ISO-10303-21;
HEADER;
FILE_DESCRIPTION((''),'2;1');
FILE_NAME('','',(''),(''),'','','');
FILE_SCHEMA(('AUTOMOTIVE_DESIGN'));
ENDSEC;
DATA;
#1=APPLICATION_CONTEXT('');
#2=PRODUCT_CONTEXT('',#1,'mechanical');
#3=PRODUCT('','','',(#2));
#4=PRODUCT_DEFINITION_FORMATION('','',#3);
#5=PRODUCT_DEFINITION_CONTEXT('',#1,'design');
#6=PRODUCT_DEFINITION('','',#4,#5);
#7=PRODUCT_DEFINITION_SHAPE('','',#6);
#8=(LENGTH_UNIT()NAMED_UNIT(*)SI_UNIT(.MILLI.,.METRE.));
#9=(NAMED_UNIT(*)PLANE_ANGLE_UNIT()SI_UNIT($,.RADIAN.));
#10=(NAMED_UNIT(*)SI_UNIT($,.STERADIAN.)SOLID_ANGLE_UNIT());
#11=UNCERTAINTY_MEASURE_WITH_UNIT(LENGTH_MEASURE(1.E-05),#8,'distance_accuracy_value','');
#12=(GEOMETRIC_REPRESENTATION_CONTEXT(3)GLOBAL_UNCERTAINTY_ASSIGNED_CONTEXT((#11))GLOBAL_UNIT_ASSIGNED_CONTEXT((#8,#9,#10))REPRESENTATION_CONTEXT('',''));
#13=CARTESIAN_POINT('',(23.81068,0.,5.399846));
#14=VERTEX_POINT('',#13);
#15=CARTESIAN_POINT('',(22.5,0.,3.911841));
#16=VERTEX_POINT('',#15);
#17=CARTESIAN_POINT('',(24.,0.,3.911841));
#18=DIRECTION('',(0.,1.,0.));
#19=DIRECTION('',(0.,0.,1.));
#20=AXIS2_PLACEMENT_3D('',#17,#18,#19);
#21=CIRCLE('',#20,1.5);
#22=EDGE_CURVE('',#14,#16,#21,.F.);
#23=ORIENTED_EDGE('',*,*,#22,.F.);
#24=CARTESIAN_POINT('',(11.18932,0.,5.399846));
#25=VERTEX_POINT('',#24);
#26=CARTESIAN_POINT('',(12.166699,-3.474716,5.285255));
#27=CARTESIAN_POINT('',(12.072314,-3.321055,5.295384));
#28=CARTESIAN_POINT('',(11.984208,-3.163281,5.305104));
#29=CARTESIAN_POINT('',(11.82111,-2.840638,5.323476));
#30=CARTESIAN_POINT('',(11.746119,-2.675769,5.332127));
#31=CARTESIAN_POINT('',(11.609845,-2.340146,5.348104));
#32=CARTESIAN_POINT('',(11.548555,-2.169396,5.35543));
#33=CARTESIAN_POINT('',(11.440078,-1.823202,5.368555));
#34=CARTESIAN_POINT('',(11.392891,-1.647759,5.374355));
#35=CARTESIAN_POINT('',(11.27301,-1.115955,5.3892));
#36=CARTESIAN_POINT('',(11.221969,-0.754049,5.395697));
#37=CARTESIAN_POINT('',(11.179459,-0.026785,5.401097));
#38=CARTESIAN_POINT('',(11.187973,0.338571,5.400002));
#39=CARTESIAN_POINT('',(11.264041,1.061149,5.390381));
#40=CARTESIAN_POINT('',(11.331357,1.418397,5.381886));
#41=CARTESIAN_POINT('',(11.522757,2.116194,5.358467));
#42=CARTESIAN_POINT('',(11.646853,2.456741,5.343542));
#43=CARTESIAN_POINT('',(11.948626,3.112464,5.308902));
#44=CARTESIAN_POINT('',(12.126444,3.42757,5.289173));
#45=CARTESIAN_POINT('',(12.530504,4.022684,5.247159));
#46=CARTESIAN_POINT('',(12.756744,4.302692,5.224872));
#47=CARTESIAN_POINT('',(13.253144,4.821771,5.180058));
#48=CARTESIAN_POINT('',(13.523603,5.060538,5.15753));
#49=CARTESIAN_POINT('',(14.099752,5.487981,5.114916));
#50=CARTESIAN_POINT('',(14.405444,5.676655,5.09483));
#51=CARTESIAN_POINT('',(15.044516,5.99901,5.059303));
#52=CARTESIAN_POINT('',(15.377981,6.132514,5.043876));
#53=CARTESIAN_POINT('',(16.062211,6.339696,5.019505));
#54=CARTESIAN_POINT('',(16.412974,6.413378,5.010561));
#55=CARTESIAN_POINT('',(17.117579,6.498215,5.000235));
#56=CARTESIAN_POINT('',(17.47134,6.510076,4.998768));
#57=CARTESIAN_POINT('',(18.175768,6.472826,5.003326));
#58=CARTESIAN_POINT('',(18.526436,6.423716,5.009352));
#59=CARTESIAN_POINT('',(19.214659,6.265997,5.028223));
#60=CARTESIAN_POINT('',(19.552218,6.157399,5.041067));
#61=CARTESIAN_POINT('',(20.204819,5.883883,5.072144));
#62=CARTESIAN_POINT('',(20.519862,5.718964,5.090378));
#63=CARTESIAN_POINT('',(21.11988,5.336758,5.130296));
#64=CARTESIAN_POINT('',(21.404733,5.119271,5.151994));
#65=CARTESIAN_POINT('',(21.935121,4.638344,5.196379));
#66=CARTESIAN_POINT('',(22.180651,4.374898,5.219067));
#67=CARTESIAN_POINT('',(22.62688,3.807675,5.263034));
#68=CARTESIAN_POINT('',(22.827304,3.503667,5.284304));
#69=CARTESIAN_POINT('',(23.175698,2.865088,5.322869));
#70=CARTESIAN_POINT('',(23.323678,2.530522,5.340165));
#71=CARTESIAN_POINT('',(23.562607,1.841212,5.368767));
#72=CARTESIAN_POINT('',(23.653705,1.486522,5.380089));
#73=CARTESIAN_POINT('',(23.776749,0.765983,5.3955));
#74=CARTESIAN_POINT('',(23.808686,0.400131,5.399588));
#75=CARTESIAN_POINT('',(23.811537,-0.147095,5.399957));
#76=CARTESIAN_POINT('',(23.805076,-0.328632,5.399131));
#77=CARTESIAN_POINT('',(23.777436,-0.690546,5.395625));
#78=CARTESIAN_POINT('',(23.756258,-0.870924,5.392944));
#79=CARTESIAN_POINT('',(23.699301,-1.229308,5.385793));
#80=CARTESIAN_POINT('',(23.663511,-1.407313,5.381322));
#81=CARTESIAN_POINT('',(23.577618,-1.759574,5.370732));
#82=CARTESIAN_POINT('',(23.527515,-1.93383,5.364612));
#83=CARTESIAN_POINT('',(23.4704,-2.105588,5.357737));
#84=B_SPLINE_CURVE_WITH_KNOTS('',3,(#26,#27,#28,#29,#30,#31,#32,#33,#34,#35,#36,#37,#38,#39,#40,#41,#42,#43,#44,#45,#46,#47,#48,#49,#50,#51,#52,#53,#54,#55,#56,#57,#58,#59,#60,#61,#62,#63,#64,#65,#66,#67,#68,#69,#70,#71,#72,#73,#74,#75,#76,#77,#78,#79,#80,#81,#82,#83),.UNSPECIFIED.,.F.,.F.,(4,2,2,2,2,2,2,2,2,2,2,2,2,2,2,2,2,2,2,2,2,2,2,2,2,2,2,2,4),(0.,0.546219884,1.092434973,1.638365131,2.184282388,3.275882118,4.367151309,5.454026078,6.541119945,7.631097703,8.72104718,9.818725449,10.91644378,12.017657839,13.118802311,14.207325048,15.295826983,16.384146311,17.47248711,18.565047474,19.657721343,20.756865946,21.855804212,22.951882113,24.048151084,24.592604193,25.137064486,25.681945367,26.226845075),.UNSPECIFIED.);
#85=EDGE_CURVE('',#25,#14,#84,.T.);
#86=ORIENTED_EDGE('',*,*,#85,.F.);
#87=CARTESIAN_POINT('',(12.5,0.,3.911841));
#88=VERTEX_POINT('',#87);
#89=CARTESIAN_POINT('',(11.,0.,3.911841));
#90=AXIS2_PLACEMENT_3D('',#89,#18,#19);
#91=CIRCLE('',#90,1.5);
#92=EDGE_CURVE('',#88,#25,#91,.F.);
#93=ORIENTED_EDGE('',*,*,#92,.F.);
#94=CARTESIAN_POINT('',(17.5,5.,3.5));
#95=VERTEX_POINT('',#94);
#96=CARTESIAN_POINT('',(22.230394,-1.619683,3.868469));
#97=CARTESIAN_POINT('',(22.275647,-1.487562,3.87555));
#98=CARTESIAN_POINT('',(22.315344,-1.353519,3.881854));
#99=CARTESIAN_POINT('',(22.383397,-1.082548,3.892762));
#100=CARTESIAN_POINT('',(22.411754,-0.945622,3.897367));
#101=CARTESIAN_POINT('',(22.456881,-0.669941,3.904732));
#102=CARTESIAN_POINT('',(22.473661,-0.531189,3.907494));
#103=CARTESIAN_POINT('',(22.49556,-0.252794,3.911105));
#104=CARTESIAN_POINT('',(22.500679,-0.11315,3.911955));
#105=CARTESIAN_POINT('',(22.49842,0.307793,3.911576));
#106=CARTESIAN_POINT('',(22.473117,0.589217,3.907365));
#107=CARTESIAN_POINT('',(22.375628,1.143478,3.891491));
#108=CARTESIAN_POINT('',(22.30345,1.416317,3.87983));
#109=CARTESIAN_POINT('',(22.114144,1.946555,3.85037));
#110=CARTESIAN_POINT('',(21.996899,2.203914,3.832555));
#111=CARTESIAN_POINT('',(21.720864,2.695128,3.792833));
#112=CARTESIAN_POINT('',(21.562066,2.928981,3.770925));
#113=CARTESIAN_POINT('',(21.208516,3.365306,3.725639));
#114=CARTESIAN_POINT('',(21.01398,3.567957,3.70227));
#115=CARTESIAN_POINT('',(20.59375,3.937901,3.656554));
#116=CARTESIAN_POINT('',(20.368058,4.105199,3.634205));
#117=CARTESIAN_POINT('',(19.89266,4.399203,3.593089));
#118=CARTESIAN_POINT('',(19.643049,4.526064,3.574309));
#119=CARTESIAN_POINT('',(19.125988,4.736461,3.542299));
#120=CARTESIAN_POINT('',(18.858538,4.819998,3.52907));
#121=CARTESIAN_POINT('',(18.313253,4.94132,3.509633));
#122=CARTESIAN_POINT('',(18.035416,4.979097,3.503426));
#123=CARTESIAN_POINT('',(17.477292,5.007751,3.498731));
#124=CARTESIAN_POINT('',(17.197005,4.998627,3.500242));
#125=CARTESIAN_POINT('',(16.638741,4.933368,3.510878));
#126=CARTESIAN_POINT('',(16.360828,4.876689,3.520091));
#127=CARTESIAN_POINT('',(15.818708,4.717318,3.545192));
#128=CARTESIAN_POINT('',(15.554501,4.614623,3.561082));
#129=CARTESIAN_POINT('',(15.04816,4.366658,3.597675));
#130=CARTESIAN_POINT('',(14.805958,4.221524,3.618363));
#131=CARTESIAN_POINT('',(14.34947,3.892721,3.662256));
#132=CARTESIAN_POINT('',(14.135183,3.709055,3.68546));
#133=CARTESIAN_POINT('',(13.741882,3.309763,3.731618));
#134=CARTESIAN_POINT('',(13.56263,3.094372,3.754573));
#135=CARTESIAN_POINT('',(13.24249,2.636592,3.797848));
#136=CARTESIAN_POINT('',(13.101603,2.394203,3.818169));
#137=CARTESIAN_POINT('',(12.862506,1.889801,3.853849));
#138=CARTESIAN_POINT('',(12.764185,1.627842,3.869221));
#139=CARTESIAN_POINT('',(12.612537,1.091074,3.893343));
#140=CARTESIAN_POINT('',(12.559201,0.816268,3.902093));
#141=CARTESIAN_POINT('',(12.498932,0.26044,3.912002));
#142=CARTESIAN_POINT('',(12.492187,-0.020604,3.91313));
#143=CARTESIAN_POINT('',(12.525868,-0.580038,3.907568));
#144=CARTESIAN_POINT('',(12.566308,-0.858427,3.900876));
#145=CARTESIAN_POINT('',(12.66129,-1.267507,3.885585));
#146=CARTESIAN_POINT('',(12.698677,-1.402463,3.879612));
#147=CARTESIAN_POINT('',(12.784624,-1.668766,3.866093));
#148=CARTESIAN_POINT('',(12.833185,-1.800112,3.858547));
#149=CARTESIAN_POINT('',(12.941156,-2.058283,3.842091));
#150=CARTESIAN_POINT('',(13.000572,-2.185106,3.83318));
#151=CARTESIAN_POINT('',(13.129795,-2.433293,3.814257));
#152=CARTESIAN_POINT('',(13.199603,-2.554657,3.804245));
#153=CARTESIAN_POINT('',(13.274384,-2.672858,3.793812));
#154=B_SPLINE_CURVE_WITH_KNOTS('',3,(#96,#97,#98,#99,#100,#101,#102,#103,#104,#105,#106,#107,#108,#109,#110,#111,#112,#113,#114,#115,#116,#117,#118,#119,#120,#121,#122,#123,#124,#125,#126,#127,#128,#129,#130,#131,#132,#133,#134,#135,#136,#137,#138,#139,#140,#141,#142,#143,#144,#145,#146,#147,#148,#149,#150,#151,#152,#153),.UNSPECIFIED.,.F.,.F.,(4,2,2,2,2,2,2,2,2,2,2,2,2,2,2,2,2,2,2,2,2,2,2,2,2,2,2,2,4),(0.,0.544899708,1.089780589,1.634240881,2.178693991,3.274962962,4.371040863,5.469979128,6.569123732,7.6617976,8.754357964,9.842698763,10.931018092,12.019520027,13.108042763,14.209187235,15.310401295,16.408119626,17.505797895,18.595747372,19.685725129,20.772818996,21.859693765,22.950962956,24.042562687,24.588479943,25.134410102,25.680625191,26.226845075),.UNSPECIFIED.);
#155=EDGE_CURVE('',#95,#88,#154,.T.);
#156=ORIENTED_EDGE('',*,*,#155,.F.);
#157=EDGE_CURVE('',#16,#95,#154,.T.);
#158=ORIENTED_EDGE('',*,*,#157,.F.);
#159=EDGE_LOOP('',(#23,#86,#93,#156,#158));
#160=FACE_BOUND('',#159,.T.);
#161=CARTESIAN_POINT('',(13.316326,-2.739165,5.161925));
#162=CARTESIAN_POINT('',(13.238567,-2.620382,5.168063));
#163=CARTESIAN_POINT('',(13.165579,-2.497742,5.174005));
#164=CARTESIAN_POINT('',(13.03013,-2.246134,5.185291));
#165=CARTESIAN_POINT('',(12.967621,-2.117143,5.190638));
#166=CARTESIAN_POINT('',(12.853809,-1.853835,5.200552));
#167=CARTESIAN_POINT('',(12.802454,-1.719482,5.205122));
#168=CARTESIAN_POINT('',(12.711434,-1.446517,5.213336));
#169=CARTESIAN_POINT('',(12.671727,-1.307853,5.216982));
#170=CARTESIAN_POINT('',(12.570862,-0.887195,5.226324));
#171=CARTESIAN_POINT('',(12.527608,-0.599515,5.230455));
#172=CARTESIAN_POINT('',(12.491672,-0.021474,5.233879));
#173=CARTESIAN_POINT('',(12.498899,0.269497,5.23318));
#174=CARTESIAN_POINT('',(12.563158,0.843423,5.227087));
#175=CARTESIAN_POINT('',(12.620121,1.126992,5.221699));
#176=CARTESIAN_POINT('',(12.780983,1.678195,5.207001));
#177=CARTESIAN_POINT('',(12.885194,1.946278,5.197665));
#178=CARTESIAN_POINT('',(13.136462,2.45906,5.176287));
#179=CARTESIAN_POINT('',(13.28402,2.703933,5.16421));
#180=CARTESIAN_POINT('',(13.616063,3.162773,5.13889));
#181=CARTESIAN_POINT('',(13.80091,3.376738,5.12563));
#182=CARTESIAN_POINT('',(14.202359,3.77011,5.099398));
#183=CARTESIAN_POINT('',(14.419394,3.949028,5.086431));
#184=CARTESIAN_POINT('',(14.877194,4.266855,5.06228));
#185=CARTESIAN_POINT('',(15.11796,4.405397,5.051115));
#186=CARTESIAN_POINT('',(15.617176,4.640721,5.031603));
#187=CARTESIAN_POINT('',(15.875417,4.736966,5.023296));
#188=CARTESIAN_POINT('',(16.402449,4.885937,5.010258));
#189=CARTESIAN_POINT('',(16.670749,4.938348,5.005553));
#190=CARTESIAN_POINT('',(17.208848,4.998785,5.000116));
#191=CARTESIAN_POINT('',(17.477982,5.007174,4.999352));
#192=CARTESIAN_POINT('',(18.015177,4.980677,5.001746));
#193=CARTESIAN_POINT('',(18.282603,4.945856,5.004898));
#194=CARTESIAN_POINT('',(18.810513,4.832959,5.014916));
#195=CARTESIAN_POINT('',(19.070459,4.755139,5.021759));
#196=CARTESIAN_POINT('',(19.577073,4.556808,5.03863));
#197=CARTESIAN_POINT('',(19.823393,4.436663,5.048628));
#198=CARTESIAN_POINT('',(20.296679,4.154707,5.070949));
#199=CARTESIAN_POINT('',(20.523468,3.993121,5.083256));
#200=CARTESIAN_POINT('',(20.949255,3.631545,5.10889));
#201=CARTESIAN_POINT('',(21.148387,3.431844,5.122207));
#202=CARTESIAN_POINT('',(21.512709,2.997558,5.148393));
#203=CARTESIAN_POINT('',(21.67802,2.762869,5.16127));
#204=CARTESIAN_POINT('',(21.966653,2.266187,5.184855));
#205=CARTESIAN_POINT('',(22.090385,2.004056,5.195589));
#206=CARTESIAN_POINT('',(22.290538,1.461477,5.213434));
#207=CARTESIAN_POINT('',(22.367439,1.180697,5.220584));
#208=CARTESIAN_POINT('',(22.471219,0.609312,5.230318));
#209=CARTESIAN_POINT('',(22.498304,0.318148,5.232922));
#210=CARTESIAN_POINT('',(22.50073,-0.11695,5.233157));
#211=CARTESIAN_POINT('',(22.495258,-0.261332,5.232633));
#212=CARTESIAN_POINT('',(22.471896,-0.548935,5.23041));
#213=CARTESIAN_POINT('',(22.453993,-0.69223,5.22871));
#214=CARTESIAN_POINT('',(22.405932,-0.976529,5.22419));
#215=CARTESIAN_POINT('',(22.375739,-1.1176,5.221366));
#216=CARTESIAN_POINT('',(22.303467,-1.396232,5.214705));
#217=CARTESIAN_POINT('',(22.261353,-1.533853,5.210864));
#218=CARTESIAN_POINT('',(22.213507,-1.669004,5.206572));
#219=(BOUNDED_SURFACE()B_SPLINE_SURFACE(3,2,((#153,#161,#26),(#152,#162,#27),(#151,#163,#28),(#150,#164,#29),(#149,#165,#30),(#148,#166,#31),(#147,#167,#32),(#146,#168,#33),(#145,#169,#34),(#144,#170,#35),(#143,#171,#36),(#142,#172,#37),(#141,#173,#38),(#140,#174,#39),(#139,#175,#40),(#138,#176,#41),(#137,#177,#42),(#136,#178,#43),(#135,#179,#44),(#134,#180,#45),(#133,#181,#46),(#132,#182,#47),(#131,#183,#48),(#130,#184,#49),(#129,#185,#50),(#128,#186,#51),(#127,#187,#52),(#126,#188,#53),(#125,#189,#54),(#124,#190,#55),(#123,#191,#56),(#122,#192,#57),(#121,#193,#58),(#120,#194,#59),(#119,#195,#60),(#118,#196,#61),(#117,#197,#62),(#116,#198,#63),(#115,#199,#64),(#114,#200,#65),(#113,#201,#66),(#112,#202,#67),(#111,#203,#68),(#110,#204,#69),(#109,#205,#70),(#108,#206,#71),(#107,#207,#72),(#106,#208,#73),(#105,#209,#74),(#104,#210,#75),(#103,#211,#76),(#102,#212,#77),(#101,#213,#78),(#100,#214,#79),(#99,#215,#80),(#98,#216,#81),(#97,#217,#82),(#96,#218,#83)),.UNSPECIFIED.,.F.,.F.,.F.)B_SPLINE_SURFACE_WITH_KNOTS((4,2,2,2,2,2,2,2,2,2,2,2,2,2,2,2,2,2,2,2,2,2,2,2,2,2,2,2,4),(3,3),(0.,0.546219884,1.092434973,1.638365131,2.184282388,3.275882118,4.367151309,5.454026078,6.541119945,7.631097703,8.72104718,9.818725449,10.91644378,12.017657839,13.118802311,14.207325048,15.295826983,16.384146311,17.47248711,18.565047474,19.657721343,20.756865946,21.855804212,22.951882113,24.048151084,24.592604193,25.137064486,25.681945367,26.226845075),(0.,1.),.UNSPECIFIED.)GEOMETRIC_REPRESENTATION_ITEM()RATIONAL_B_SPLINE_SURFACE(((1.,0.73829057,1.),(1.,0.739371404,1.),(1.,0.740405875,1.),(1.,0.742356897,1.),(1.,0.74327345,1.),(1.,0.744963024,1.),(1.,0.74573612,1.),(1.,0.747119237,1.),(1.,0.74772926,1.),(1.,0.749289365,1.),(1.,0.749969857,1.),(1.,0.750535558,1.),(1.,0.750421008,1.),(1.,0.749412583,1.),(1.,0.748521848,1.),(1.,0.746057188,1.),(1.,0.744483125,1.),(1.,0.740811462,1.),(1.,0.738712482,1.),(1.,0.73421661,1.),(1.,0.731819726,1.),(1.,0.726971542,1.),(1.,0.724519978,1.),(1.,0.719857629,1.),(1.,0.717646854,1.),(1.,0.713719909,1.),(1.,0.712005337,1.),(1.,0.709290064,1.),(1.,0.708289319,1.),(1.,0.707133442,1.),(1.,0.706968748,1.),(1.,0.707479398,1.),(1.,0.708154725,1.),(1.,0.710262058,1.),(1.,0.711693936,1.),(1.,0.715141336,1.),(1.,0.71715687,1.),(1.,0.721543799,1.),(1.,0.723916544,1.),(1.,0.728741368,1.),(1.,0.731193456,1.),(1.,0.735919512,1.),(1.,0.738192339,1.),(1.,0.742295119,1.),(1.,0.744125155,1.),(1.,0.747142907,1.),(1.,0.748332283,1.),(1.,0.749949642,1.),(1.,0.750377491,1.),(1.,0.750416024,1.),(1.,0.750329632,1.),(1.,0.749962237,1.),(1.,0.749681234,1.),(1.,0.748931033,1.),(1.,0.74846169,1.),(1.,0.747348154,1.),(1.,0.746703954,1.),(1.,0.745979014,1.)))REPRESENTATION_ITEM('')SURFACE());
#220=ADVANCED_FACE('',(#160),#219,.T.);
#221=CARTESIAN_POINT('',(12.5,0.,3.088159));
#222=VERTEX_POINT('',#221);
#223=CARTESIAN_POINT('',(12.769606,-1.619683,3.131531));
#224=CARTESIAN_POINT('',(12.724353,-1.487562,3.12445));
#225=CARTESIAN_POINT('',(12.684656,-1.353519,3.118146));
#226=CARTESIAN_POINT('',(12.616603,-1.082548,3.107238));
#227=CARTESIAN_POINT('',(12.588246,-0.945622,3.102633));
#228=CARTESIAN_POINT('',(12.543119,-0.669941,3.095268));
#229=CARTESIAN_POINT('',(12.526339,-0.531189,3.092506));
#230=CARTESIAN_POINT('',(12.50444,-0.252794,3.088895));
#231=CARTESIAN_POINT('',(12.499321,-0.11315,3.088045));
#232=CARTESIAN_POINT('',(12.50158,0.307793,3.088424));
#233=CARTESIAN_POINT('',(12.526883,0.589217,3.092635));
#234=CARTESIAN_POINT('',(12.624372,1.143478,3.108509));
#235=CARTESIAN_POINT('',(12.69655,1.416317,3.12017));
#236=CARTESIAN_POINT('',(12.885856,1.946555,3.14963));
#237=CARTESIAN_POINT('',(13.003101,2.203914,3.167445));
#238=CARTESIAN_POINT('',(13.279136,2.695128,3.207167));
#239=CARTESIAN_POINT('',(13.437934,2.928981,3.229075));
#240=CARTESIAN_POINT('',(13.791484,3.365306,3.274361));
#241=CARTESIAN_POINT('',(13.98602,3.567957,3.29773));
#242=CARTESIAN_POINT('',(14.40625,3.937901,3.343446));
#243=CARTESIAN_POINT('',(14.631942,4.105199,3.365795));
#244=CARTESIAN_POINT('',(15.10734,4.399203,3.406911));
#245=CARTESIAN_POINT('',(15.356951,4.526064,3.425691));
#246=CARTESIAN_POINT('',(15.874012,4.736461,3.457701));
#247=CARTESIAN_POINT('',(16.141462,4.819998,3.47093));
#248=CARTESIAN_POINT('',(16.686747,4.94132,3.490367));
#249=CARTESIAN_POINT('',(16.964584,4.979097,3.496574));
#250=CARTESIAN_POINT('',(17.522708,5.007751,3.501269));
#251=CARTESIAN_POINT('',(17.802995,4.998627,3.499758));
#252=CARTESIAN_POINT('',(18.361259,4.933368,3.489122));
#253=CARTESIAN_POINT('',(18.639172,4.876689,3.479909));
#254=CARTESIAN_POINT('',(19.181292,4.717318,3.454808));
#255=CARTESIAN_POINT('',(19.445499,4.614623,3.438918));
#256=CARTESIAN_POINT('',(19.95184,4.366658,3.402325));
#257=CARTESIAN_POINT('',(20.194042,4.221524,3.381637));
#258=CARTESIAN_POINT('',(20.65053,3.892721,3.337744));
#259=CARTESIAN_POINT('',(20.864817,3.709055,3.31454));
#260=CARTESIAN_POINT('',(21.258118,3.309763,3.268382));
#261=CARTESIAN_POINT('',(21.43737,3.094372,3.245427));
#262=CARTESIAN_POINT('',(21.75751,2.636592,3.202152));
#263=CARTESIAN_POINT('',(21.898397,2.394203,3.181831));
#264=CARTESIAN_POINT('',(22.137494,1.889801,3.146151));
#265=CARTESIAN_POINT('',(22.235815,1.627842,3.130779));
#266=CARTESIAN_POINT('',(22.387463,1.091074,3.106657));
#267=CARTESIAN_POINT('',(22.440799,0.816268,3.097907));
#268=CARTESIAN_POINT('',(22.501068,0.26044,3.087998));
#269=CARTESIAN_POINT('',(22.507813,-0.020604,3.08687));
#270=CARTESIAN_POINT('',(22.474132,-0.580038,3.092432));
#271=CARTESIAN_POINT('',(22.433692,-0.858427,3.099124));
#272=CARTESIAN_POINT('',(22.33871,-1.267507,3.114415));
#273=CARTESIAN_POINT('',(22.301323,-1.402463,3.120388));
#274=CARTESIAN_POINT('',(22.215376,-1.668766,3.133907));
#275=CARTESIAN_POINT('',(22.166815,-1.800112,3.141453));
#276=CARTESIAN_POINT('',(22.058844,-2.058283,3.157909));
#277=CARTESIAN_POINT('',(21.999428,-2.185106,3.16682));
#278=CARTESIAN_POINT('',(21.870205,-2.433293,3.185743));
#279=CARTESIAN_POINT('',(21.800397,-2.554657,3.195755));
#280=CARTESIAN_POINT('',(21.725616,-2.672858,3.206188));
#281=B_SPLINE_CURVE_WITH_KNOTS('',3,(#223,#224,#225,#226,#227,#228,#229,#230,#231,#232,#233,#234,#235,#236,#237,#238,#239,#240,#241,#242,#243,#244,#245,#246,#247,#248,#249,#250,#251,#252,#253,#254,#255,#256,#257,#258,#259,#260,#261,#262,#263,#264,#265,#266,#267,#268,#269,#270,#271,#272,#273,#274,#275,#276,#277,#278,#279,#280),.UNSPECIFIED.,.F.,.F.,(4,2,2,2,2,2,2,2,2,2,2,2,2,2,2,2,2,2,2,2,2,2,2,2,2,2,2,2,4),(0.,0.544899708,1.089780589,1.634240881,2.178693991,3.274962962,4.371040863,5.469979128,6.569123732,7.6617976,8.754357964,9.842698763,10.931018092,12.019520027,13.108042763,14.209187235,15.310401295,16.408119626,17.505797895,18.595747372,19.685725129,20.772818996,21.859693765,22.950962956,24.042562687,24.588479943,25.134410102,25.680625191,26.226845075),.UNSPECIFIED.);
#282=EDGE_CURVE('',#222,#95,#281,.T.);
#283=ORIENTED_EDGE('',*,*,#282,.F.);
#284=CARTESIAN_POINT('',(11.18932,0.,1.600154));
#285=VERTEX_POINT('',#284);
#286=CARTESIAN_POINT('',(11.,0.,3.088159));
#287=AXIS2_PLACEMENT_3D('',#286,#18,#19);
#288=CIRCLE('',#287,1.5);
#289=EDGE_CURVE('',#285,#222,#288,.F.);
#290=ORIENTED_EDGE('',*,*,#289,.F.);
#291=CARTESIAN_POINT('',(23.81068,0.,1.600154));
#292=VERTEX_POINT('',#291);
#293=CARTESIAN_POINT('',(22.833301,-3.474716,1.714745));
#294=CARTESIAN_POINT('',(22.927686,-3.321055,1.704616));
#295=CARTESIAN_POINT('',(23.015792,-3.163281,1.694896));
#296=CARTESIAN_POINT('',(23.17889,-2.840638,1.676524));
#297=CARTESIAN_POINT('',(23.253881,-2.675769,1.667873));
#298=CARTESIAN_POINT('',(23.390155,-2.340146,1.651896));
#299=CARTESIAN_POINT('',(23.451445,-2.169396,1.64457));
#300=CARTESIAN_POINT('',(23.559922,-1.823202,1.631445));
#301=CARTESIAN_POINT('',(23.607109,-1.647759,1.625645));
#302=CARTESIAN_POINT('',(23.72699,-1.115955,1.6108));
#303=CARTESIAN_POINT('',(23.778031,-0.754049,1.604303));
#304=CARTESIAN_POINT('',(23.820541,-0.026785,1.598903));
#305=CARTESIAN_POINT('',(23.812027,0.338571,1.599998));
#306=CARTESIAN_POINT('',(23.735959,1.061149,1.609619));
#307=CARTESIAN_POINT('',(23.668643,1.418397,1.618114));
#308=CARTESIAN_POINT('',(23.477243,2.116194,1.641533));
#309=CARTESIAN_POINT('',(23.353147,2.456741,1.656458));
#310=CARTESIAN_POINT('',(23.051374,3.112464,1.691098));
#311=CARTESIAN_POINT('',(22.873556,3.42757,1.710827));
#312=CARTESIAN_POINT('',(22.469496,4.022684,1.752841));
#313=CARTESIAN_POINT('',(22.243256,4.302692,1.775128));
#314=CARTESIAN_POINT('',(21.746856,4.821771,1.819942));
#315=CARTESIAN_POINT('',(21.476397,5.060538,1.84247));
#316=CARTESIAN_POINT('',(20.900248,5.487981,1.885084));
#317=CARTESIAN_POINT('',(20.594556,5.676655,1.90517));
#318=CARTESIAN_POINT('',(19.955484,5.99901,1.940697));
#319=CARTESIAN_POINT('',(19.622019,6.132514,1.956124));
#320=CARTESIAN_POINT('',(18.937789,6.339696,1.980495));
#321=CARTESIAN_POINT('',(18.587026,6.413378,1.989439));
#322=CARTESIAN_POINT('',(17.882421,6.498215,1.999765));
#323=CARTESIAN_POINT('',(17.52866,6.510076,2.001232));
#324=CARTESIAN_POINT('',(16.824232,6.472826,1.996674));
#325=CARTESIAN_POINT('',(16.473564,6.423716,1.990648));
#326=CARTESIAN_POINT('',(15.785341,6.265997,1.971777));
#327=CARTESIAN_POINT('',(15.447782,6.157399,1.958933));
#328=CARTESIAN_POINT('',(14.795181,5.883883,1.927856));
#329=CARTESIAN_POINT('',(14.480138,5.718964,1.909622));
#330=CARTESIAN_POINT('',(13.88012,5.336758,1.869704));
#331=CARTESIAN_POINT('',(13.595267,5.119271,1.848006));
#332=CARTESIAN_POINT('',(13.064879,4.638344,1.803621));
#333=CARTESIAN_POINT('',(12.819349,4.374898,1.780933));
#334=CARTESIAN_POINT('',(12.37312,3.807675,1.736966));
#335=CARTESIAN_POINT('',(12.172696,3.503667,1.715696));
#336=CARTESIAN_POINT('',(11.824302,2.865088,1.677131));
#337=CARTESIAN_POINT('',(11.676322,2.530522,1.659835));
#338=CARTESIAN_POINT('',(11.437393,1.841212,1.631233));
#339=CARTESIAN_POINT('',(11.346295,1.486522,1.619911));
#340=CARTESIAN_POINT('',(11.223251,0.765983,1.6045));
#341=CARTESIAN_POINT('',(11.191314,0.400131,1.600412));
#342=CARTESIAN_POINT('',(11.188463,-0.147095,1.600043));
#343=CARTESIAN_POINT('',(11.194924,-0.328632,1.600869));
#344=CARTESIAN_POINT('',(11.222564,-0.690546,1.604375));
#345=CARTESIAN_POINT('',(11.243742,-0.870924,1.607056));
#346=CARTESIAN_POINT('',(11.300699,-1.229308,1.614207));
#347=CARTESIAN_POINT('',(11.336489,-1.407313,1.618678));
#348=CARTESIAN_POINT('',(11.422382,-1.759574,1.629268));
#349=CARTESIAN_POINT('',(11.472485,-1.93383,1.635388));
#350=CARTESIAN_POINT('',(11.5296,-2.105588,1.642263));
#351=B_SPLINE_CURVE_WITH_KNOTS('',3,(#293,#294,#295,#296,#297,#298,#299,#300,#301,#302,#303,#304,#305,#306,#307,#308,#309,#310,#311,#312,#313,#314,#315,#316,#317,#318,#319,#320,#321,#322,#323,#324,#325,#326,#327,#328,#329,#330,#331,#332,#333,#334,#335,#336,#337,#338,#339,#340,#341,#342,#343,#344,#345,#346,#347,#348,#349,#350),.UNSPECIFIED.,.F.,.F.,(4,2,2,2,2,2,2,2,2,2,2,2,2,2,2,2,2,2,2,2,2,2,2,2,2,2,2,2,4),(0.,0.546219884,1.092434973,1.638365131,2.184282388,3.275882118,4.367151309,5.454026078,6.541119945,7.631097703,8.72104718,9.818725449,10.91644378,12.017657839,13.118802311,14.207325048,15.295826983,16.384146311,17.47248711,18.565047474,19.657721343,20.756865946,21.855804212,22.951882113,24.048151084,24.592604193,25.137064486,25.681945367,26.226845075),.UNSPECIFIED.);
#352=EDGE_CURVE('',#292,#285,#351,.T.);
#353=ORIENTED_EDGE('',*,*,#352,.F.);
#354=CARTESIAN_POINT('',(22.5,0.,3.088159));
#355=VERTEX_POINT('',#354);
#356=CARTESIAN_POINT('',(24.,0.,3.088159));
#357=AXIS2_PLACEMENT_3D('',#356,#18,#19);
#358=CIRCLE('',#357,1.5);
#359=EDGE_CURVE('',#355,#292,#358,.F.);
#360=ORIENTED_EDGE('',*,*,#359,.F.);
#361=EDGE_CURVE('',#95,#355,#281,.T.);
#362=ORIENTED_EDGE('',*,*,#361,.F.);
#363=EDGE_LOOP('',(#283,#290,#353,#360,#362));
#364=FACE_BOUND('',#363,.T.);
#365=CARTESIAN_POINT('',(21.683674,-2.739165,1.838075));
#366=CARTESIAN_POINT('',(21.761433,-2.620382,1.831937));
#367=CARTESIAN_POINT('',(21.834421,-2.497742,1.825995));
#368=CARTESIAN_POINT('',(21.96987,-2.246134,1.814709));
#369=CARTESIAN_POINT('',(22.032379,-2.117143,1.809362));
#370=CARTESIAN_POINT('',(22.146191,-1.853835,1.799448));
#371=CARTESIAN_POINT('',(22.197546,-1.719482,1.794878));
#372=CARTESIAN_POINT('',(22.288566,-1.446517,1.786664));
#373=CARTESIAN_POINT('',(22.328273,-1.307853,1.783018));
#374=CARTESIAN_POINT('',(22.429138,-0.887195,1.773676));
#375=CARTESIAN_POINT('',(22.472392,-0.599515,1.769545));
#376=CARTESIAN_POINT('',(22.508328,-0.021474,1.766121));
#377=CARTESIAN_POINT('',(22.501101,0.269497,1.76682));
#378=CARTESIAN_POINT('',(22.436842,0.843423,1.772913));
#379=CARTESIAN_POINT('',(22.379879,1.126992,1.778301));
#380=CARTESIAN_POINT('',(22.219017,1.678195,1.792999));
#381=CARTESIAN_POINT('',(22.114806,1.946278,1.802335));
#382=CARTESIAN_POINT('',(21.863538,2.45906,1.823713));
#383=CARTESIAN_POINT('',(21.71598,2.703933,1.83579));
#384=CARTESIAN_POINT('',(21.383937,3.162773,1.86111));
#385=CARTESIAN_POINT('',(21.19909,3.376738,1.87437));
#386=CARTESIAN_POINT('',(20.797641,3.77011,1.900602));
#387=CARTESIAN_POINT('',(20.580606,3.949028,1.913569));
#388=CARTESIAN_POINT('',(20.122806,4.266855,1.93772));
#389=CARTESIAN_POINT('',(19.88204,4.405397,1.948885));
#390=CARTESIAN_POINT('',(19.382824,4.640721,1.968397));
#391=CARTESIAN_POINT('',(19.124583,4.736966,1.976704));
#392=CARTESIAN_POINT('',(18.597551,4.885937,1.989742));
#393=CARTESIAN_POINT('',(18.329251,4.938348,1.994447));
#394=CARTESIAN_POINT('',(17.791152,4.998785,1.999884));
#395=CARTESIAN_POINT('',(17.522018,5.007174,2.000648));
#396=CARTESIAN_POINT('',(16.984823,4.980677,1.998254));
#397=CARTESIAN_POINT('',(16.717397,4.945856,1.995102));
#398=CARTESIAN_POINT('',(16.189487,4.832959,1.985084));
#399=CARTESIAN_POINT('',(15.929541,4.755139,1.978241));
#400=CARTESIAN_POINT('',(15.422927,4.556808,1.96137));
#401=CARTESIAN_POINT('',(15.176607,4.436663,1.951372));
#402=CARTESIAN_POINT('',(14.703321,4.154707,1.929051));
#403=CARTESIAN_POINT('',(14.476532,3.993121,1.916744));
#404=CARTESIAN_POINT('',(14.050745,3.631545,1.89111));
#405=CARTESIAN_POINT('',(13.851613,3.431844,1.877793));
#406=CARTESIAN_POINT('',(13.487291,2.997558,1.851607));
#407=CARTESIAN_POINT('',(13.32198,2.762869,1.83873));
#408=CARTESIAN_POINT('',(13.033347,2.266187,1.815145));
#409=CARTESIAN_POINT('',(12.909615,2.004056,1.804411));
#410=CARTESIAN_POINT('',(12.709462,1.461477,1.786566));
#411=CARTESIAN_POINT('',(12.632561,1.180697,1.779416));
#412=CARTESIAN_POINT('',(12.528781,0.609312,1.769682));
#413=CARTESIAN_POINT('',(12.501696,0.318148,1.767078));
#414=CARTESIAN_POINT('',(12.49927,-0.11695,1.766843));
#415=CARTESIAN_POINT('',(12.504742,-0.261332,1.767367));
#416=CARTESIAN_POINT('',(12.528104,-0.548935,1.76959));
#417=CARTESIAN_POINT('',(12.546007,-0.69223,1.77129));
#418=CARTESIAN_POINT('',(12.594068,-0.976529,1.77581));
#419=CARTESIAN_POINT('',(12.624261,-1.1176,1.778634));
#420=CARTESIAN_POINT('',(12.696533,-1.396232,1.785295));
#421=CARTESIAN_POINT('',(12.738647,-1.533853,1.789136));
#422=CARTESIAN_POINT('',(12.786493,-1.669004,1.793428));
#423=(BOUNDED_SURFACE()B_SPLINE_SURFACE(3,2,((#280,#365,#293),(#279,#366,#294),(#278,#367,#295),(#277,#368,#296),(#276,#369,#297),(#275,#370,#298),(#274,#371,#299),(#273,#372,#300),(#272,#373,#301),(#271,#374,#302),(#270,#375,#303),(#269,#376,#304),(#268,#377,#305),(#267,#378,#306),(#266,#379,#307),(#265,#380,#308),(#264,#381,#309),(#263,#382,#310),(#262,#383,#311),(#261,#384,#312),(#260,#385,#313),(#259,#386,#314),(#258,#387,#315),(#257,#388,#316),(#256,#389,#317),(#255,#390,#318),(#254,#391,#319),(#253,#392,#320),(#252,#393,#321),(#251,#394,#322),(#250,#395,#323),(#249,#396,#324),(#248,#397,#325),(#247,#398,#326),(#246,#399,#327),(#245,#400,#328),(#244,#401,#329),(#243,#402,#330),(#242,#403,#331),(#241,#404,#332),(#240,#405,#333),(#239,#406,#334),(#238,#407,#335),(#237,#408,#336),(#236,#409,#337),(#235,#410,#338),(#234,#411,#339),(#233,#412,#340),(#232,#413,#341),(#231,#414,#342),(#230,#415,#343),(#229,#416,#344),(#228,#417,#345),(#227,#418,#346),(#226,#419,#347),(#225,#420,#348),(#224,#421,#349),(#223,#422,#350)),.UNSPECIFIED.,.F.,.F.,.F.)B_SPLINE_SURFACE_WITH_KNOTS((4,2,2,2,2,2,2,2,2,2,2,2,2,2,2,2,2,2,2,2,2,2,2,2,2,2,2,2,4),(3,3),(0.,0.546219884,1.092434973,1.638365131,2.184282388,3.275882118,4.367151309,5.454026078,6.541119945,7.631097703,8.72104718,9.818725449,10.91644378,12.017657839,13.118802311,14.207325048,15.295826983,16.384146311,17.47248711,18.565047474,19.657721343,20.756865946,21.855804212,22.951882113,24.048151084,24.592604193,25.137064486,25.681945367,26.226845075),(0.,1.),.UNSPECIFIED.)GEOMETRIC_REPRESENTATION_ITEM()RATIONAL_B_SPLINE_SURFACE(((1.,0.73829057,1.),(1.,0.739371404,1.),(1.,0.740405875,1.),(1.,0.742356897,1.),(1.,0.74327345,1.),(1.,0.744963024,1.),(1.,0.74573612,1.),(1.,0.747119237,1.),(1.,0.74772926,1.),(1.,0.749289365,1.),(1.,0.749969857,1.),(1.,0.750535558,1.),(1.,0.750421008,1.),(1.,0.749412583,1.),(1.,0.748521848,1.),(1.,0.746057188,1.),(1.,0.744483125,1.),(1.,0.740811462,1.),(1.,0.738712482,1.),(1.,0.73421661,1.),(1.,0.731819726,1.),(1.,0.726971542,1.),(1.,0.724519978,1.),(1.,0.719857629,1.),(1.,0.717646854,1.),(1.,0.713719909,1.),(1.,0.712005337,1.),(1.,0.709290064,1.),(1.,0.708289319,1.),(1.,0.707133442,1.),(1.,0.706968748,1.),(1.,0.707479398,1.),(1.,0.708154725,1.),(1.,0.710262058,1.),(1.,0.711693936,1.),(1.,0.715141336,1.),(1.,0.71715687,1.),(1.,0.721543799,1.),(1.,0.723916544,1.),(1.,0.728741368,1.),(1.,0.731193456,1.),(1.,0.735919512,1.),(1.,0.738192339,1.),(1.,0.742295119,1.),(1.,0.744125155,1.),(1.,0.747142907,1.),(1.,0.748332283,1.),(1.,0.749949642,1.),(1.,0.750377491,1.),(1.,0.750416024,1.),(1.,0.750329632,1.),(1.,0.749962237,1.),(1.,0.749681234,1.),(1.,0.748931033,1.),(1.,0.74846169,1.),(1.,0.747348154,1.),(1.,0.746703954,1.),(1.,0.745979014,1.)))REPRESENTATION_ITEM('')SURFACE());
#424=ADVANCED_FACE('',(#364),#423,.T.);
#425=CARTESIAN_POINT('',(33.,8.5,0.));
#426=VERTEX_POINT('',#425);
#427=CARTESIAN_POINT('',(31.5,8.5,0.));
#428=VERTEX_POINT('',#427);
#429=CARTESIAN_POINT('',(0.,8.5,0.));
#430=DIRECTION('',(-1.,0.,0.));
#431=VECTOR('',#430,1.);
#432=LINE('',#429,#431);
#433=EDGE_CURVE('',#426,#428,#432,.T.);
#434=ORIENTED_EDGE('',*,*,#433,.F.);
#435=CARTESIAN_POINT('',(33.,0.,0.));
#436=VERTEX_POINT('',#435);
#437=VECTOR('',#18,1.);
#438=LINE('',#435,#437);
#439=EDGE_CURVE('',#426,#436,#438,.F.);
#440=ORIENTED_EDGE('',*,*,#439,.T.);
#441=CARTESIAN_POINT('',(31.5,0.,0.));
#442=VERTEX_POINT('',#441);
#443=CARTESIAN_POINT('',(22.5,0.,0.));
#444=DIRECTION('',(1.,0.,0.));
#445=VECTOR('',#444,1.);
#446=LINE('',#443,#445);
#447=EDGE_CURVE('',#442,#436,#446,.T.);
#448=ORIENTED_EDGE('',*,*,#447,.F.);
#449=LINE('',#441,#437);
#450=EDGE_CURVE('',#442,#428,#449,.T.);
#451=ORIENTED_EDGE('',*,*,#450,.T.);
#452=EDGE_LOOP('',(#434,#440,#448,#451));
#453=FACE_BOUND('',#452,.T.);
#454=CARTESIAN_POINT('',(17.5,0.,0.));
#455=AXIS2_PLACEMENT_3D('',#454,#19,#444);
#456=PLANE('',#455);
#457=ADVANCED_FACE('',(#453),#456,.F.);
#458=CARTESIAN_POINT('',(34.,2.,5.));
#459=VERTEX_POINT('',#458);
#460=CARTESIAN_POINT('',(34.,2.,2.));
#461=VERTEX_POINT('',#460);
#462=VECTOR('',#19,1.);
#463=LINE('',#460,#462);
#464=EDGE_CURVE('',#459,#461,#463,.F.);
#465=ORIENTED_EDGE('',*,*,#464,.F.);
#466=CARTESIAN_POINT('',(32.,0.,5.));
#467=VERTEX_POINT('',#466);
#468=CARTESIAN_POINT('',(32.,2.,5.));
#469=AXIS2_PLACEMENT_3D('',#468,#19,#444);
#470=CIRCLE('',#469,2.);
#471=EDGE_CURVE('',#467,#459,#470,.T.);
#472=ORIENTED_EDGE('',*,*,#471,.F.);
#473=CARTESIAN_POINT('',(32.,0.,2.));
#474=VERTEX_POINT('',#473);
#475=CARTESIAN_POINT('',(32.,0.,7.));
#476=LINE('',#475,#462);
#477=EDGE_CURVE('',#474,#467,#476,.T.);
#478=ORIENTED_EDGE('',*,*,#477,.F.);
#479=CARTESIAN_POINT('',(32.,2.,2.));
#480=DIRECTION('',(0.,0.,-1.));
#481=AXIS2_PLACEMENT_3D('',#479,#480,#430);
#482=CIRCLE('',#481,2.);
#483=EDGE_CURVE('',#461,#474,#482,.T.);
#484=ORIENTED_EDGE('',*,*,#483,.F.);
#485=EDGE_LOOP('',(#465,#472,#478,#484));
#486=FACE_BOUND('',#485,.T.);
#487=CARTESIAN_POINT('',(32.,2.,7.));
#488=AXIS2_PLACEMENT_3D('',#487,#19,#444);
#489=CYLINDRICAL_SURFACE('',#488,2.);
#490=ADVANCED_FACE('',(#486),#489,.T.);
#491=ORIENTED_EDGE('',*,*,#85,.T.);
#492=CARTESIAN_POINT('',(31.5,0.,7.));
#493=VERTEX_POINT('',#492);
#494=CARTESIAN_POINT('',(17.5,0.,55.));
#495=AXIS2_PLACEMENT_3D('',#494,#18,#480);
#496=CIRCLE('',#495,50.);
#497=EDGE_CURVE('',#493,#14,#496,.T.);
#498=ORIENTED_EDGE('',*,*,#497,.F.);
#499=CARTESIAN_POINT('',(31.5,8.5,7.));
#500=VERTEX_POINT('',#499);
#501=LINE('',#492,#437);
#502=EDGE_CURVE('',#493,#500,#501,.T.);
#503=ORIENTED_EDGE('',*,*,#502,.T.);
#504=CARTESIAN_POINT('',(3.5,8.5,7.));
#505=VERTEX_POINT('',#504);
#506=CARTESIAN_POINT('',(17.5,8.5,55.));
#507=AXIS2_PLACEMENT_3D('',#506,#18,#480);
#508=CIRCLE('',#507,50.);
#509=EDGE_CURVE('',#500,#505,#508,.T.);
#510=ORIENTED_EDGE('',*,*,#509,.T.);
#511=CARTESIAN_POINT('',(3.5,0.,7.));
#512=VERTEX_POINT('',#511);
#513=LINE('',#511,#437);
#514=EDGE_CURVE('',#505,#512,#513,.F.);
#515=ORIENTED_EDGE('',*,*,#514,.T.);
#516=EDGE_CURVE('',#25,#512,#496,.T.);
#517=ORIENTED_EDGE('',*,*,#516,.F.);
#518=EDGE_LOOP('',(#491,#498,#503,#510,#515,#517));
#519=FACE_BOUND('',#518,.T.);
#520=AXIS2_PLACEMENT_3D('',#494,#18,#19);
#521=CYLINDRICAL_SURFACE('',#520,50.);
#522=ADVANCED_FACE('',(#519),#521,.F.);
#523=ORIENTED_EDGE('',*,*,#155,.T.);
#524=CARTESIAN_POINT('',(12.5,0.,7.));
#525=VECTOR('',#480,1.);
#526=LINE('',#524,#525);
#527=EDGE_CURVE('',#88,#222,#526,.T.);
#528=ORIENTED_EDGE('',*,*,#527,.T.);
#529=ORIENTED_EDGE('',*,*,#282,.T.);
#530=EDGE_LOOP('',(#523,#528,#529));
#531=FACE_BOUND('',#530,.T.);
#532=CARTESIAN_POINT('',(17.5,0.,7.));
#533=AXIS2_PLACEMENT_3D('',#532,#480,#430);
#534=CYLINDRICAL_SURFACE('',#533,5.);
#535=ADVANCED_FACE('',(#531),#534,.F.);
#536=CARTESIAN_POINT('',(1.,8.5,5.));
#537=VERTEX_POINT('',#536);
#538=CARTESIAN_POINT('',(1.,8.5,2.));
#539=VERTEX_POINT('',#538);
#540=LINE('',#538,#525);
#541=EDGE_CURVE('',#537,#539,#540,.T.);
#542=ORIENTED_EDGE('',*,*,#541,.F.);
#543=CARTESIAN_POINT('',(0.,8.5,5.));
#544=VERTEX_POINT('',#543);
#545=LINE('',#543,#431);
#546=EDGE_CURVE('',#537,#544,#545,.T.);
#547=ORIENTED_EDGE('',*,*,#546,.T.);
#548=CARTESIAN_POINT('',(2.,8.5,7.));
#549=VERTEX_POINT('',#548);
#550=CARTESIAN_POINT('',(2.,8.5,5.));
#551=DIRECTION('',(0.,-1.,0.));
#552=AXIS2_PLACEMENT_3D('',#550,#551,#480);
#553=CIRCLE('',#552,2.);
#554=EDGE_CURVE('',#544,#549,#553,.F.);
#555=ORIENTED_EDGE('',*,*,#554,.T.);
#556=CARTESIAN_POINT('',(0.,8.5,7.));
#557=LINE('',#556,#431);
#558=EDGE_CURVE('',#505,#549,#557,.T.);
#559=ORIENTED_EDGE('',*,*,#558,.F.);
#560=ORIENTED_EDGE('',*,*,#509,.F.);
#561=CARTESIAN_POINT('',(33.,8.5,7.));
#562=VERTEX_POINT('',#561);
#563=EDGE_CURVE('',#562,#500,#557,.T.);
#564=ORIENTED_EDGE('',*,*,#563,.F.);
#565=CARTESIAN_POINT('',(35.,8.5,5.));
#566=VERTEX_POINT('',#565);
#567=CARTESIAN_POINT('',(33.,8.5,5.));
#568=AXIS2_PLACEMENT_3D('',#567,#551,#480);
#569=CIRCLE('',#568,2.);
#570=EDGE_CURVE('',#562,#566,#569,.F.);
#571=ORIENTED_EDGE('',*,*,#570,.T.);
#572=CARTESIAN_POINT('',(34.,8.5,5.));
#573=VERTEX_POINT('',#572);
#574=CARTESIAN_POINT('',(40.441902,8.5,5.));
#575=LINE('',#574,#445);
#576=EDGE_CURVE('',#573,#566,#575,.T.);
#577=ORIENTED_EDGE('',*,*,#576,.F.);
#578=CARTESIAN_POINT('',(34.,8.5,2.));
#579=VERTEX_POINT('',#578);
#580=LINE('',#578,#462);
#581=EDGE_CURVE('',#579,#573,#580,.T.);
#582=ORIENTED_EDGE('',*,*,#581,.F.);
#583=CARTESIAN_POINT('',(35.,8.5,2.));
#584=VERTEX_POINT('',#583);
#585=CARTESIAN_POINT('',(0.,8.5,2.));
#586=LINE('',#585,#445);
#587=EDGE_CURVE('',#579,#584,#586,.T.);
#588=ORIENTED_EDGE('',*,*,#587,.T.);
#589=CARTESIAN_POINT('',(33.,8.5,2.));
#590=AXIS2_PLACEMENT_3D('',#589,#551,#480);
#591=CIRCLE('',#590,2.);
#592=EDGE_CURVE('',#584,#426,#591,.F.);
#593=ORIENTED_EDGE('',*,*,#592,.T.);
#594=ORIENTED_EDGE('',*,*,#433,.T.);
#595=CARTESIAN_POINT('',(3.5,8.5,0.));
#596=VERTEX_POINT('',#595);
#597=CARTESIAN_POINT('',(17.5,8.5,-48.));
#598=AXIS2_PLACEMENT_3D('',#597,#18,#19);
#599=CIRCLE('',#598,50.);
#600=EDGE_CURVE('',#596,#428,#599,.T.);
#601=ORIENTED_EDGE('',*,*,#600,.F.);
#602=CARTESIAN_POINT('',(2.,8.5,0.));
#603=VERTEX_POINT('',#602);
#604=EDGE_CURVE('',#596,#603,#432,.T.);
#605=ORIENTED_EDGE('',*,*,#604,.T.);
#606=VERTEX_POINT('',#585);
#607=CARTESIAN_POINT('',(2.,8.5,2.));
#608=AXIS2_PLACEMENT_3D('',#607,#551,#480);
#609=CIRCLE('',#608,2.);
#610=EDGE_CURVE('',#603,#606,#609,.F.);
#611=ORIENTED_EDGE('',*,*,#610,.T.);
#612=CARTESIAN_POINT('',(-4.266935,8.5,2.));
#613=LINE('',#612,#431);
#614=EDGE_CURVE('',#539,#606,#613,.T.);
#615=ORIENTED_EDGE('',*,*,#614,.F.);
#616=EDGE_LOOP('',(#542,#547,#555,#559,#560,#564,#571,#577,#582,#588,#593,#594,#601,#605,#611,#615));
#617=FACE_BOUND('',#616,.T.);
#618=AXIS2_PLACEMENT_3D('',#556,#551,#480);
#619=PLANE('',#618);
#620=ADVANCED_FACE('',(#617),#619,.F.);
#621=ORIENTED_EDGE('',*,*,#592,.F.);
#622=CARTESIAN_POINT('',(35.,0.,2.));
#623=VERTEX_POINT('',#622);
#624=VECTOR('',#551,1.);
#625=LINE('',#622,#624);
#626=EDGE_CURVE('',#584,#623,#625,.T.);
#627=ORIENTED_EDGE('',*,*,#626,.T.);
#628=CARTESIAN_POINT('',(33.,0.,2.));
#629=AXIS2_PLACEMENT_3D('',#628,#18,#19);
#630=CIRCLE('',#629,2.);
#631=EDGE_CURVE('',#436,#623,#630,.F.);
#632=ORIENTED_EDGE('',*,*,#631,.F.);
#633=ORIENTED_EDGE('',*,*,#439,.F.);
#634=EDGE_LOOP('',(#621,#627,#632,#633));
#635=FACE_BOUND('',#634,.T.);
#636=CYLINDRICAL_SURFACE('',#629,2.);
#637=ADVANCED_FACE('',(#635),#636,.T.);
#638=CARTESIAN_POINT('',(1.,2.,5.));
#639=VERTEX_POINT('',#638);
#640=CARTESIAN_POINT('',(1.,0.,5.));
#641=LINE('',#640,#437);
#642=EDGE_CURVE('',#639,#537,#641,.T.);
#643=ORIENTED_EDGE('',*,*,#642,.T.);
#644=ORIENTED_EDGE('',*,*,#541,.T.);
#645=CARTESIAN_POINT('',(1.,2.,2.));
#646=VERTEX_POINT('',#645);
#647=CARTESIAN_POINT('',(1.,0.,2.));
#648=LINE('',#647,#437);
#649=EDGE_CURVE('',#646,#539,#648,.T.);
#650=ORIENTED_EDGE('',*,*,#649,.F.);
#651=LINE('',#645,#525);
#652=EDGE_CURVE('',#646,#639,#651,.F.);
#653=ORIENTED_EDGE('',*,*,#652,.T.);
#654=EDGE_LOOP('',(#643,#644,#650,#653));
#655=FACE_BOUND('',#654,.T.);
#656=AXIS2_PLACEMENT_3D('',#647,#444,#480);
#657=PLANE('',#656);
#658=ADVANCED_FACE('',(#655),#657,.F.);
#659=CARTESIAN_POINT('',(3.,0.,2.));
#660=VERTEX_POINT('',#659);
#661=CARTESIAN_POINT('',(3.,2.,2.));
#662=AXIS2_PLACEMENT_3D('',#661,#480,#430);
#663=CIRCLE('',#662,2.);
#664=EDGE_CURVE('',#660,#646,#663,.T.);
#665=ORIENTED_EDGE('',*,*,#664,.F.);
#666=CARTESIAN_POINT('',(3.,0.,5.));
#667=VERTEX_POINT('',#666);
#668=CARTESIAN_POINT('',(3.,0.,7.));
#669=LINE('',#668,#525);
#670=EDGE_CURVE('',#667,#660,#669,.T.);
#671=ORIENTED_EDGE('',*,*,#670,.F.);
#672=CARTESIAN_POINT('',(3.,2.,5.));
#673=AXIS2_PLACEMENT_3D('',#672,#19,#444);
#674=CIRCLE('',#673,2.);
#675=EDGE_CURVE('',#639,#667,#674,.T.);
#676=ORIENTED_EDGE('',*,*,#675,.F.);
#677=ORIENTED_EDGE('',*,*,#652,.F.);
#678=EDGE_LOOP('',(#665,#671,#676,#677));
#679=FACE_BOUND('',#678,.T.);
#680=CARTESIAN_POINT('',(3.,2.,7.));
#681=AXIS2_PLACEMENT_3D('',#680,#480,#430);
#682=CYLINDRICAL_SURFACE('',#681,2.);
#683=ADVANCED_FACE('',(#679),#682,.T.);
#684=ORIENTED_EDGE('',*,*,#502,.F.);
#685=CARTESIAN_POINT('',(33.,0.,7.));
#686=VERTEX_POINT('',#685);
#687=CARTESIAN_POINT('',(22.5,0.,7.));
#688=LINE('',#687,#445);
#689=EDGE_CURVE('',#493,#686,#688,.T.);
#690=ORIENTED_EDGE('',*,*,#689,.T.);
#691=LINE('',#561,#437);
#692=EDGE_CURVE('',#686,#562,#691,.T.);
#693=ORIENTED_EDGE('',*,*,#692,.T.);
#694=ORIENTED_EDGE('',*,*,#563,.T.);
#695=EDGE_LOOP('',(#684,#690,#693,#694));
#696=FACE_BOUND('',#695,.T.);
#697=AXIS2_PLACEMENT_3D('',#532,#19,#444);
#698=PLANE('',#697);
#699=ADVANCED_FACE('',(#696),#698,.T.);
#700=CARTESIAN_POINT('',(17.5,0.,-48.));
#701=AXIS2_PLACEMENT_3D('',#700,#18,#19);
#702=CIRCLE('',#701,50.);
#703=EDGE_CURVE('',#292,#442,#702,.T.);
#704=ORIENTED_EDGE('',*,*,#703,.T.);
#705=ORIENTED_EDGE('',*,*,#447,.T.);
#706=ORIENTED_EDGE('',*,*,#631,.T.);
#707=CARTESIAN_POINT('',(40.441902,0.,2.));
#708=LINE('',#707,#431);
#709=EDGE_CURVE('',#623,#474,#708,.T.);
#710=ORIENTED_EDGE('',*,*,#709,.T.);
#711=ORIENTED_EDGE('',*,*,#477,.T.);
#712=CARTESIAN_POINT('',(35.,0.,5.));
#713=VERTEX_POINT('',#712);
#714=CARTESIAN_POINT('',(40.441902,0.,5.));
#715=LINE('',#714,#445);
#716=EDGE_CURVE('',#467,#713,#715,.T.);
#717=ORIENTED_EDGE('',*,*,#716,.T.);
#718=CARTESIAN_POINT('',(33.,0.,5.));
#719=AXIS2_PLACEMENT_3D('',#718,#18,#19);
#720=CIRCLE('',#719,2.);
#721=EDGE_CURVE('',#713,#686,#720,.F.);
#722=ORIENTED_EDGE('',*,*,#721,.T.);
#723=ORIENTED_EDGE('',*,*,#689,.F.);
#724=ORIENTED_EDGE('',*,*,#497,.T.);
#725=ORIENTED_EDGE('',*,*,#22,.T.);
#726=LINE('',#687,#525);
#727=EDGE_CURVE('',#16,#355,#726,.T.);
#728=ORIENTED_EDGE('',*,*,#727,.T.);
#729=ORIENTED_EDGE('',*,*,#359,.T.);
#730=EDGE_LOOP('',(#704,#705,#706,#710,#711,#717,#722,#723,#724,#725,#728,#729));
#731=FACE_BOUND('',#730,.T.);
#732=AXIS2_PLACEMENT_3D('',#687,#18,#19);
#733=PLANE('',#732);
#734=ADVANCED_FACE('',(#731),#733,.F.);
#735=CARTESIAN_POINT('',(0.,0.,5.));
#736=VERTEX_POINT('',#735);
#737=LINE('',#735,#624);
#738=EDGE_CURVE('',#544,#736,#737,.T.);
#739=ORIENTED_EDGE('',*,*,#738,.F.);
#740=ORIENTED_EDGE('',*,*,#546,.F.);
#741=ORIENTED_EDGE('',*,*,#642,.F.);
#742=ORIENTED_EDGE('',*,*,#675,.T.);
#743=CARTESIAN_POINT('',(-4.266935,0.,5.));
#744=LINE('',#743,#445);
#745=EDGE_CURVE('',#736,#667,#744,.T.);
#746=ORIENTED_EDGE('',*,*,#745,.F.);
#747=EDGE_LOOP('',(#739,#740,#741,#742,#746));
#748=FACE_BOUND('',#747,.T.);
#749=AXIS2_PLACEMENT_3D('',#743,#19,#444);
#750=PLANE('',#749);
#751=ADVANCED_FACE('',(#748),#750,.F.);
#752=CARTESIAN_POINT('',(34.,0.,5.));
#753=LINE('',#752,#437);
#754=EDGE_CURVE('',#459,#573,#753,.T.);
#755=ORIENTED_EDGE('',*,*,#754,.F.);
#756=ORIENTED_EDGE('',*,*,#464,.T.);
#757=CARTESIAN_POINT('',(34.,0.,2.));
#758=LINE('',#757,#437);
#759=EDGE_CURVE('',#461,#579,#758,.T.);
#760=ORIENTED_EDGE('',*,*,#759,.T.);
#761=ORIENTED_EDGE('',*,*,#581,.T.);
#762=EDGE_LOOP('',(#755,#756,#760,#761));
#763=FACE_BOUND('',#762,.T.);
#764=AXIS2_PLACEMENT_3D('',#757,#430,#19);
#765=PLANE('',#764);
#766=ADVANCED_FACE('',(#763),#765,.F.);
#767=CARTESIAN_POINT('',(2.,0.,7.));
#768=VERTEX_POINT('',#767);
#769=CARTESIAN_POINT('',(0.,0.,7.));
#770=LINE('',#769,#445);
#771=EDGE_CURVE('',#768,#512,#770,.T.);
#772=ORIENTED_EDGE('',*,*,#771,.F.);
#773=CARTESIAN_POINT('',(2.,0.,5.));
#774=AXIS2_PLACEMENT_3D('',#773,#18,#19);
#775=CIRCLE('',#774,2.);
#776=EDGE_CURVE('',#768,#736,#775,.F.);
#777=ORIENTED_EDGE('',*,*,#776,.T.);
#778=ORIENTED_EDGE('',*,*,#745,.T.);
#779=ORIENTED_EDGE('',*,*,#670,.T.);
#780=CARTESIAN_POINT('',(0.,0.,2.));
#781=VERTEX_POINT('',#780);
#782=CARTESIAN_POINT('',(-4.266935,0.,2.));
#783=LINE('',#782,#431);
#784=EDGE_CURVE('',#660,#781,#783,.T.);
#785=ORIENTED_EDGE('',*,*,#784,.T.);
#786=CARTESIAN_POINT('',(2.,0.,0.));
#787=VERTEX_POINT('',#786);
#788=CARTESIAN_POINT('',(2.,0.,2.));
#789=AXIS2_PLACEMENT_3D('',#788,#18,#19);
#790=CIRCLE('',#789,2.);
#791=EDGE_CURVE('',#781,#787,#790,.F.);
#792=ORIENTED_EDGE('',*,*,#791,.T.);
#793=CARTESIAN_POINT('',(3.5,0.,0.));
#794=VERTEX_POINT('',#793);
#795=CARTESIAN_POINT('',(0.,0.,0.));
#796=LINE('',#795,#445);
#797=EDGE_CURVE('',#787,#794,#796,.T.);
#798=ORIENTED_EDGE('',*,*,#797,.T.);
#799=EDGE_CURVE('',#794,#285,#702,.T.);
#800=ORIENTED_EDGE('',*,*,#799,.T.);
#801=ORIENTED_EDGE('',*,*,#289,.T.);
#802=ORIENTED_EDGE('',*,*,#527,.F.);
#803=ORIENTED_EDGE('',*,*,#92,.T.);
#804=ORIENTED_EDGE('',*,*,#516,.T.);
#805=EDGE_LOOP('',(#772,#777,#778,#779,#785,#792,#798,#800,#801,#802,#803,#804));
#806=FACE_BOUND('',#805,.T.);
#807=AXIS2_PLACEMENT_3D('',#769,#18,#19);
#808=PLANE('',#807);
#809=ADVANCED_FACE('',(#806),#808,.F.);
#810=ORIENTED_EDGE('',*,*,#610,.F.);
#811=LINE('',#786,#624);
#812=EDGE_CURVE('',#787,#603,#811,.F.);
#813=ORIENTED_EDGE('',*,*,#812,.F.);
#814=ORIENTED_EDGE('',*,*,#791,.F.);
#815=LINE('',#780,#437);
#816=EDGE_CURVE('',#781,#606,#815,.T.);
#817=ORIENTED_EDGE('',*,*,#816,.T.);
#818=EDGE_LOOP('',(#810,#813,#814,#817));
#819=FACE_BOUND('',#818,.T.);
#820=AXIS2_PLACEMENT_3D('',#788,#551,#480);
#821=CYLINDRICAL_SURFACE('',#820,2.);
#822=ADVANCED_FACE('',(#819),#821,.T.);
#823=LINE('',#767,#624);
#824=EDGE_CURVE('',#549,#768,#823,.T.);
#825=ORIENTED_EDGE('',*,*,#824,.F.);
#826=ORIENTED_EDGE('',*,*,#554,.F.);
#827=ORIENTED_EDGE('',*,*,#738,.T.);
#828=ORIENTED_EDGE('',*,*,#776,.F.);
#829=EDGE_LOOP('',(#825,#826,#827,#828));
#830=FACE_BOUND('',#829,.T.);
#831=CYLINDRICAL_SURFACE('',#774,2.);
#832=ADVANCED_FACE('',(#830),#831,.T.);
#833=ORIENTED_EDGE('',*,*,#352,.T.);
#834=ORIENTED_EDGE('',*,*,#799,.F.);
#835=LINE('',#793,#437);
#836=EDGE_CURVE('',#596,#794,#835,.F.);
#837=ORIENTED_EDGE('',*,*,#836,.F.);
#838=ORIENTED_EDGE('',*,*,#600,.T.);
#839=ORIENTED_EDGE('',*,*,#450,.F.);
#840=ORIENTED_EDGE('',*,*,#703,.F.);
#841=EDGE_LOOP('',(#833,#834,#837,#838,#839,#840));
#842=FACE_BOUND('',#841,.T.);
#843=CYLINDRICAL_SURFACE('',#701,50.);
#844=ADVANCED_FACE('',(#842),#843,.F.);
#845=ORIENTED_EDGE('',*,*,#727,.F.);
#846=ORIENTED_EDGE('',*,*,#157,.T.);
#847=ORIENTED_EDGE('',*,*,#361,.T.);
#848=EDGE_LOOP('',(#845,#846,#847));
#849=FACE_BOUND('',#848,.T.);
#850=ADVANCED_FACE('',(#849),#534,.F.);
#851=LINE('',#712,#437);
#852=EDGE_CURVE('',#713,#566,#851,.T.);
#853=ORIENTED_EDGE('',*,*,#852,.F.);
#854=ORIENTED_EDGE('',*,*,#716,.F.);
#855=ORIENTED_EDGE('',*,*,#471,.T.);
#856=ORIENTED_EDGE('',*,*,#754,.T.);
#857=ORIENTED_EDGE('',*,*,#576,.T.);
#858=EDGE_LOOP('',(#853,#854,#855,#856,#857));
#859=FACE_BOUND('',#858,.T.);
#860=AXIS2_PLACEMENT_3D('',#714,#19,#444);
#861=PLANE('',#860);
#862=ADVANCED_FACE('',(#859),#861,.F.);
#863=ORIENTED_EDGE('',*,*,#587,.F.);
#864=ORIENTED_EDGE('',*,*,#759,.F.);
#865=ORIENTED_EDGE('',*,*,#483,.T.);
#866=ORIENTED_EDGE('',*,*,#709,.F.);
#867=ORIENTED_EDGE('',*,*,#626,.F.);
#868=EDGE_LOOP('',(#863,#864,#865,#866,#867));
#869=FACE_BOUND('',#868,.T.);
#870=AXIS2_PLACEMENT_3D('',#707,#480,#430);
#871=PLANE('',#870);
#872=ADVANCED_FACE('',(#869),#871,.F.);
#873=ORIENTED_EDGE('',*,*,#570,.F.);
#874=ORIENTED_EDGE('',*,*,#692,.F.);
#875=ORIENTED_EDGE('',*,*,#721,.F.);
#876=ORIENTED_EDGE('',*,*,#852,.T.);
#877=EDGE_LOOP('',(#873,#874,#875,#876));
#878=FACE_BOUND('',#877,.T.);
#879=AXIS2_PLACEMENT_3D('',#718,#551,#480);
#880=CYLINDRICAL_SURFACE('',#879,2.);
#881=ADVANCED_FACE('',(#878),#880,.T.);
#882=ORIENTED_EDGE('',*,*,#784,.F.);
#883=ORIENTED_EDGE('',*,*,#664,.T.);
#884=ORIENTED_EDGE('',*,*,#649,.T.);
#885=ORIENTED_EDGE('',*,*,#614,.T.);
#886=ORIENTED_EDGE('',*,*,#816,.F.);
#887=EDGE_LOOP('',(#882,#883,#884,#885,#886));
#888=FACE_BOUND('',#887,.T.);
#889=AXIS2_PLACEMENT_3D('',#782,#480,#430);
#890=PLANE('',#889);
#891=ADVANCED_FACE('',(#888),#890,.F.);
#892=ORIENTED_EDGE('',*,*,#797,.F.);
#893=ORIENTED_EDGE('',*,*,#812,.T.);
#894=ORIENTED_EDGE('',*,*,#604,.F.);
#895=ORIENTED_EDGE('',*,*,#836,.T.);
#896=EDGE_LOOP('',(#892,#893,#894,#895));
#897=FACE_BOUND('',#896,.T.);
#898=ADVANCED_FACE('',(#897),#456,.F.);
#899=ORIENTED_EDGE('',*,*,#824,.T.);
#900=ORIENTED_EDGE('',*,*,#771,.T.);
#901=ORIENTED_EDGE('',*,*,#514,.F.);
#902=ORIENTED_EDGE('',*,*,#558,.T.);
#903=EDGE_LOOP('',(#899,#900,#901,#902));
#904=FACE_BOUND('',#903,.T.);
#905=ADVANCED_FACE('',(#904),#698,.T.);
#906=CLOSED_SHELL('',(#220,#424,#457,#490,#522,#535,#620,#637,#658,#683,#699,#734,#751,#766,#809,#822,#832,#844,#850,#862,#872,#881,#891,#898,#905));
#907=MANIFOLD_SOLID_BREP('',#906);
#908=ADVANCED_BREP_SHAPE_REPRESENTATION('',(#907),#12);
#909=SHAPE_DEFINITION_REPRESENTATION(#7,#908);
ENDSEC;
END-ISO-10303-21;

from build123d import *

# Parameters (mm, degrees)
BOSS_EXTRUDE1_DEPTH = 7
SKETCH2_R           = 50
SKETCH2_W           = 6.441902201
SKETCH2_H           = 3
SKETCH2_W_2         = 5.266935295
CUT_EXTRUDE1_DEPTH  = 37.691279618
FILLET1_R           = 2
FILLET2_R           = 1.5


with BuildPart() as part:
    # Sketch1 → Boss-Extrude1 (new body)
    with BuildSketch(Plane.XY):
        with BuildLine():
            Line((0, 0), (12.5, 0))
            ThreePointArc((12.5, 0), (17.5, 5), (22.5, 0))
            Line((22.5, 0), (35, 0))
            Line((35, 0), (35, 8.5))
            Line((35, 8.5), (0, 8.5))
            Line((0, 8.5), (0, 0))
        make_face()
    extrude(amount=BOSS_EXTRUDE1_DEPTH)

    # Sketch2 → Cut-Extrude1 (cut, through all)
    with BuildSketch(Plane(origin=(0, 8.5, 0), x_dir=(1, 0, 0), z_dir=(0, 1, 0))):
        with Locations((17.5, 48)):
            Circle(SKETCH2_R)
        with Locations((17.5, -55)):
            Circle(SKETCH2_R)
        with Locations((37.220951101, -3.5)):
            Rectangle(SKETCH2_W, SKETCH2_H)
        with Locations((-1.633467648, -3.5)):
            Rectangle(SKETCH2_W_2, SKETCH2_H)
    extrude(amount=-CUT_EXTRUDE1_DEPTH, mode=Mode.SUBTRACT)

    # Fillet1
    fillet1_edges = [part.edges().sort_by_distance(p)[0] for p in [
        (35, 4.25, 0),
        (35, 4.25, 7),
        (0, 4.25, 7),
        (0, 4.25, 0),
        (1, 0, 3.5),
        (34, 0, 3.5),
    ]]
    fillet(fillet1_edges, radius=FILLET1_R - 0.0001)  # a hair under: the kernel refuses the full size

    # Fillet2
    fillet2_edges = [part.edges().sort_by_distance(p)[0] for p in [
        (17.48803644, 4.999985682, 1.999998553),
        (17.48803647, 4.999985682, 5.000001447),
    ]]
    fillet(fillet2_edges, radius=FILLET2_R - 0.0001)  # a hair under: the kernel refuses the full size


solid = part.part
